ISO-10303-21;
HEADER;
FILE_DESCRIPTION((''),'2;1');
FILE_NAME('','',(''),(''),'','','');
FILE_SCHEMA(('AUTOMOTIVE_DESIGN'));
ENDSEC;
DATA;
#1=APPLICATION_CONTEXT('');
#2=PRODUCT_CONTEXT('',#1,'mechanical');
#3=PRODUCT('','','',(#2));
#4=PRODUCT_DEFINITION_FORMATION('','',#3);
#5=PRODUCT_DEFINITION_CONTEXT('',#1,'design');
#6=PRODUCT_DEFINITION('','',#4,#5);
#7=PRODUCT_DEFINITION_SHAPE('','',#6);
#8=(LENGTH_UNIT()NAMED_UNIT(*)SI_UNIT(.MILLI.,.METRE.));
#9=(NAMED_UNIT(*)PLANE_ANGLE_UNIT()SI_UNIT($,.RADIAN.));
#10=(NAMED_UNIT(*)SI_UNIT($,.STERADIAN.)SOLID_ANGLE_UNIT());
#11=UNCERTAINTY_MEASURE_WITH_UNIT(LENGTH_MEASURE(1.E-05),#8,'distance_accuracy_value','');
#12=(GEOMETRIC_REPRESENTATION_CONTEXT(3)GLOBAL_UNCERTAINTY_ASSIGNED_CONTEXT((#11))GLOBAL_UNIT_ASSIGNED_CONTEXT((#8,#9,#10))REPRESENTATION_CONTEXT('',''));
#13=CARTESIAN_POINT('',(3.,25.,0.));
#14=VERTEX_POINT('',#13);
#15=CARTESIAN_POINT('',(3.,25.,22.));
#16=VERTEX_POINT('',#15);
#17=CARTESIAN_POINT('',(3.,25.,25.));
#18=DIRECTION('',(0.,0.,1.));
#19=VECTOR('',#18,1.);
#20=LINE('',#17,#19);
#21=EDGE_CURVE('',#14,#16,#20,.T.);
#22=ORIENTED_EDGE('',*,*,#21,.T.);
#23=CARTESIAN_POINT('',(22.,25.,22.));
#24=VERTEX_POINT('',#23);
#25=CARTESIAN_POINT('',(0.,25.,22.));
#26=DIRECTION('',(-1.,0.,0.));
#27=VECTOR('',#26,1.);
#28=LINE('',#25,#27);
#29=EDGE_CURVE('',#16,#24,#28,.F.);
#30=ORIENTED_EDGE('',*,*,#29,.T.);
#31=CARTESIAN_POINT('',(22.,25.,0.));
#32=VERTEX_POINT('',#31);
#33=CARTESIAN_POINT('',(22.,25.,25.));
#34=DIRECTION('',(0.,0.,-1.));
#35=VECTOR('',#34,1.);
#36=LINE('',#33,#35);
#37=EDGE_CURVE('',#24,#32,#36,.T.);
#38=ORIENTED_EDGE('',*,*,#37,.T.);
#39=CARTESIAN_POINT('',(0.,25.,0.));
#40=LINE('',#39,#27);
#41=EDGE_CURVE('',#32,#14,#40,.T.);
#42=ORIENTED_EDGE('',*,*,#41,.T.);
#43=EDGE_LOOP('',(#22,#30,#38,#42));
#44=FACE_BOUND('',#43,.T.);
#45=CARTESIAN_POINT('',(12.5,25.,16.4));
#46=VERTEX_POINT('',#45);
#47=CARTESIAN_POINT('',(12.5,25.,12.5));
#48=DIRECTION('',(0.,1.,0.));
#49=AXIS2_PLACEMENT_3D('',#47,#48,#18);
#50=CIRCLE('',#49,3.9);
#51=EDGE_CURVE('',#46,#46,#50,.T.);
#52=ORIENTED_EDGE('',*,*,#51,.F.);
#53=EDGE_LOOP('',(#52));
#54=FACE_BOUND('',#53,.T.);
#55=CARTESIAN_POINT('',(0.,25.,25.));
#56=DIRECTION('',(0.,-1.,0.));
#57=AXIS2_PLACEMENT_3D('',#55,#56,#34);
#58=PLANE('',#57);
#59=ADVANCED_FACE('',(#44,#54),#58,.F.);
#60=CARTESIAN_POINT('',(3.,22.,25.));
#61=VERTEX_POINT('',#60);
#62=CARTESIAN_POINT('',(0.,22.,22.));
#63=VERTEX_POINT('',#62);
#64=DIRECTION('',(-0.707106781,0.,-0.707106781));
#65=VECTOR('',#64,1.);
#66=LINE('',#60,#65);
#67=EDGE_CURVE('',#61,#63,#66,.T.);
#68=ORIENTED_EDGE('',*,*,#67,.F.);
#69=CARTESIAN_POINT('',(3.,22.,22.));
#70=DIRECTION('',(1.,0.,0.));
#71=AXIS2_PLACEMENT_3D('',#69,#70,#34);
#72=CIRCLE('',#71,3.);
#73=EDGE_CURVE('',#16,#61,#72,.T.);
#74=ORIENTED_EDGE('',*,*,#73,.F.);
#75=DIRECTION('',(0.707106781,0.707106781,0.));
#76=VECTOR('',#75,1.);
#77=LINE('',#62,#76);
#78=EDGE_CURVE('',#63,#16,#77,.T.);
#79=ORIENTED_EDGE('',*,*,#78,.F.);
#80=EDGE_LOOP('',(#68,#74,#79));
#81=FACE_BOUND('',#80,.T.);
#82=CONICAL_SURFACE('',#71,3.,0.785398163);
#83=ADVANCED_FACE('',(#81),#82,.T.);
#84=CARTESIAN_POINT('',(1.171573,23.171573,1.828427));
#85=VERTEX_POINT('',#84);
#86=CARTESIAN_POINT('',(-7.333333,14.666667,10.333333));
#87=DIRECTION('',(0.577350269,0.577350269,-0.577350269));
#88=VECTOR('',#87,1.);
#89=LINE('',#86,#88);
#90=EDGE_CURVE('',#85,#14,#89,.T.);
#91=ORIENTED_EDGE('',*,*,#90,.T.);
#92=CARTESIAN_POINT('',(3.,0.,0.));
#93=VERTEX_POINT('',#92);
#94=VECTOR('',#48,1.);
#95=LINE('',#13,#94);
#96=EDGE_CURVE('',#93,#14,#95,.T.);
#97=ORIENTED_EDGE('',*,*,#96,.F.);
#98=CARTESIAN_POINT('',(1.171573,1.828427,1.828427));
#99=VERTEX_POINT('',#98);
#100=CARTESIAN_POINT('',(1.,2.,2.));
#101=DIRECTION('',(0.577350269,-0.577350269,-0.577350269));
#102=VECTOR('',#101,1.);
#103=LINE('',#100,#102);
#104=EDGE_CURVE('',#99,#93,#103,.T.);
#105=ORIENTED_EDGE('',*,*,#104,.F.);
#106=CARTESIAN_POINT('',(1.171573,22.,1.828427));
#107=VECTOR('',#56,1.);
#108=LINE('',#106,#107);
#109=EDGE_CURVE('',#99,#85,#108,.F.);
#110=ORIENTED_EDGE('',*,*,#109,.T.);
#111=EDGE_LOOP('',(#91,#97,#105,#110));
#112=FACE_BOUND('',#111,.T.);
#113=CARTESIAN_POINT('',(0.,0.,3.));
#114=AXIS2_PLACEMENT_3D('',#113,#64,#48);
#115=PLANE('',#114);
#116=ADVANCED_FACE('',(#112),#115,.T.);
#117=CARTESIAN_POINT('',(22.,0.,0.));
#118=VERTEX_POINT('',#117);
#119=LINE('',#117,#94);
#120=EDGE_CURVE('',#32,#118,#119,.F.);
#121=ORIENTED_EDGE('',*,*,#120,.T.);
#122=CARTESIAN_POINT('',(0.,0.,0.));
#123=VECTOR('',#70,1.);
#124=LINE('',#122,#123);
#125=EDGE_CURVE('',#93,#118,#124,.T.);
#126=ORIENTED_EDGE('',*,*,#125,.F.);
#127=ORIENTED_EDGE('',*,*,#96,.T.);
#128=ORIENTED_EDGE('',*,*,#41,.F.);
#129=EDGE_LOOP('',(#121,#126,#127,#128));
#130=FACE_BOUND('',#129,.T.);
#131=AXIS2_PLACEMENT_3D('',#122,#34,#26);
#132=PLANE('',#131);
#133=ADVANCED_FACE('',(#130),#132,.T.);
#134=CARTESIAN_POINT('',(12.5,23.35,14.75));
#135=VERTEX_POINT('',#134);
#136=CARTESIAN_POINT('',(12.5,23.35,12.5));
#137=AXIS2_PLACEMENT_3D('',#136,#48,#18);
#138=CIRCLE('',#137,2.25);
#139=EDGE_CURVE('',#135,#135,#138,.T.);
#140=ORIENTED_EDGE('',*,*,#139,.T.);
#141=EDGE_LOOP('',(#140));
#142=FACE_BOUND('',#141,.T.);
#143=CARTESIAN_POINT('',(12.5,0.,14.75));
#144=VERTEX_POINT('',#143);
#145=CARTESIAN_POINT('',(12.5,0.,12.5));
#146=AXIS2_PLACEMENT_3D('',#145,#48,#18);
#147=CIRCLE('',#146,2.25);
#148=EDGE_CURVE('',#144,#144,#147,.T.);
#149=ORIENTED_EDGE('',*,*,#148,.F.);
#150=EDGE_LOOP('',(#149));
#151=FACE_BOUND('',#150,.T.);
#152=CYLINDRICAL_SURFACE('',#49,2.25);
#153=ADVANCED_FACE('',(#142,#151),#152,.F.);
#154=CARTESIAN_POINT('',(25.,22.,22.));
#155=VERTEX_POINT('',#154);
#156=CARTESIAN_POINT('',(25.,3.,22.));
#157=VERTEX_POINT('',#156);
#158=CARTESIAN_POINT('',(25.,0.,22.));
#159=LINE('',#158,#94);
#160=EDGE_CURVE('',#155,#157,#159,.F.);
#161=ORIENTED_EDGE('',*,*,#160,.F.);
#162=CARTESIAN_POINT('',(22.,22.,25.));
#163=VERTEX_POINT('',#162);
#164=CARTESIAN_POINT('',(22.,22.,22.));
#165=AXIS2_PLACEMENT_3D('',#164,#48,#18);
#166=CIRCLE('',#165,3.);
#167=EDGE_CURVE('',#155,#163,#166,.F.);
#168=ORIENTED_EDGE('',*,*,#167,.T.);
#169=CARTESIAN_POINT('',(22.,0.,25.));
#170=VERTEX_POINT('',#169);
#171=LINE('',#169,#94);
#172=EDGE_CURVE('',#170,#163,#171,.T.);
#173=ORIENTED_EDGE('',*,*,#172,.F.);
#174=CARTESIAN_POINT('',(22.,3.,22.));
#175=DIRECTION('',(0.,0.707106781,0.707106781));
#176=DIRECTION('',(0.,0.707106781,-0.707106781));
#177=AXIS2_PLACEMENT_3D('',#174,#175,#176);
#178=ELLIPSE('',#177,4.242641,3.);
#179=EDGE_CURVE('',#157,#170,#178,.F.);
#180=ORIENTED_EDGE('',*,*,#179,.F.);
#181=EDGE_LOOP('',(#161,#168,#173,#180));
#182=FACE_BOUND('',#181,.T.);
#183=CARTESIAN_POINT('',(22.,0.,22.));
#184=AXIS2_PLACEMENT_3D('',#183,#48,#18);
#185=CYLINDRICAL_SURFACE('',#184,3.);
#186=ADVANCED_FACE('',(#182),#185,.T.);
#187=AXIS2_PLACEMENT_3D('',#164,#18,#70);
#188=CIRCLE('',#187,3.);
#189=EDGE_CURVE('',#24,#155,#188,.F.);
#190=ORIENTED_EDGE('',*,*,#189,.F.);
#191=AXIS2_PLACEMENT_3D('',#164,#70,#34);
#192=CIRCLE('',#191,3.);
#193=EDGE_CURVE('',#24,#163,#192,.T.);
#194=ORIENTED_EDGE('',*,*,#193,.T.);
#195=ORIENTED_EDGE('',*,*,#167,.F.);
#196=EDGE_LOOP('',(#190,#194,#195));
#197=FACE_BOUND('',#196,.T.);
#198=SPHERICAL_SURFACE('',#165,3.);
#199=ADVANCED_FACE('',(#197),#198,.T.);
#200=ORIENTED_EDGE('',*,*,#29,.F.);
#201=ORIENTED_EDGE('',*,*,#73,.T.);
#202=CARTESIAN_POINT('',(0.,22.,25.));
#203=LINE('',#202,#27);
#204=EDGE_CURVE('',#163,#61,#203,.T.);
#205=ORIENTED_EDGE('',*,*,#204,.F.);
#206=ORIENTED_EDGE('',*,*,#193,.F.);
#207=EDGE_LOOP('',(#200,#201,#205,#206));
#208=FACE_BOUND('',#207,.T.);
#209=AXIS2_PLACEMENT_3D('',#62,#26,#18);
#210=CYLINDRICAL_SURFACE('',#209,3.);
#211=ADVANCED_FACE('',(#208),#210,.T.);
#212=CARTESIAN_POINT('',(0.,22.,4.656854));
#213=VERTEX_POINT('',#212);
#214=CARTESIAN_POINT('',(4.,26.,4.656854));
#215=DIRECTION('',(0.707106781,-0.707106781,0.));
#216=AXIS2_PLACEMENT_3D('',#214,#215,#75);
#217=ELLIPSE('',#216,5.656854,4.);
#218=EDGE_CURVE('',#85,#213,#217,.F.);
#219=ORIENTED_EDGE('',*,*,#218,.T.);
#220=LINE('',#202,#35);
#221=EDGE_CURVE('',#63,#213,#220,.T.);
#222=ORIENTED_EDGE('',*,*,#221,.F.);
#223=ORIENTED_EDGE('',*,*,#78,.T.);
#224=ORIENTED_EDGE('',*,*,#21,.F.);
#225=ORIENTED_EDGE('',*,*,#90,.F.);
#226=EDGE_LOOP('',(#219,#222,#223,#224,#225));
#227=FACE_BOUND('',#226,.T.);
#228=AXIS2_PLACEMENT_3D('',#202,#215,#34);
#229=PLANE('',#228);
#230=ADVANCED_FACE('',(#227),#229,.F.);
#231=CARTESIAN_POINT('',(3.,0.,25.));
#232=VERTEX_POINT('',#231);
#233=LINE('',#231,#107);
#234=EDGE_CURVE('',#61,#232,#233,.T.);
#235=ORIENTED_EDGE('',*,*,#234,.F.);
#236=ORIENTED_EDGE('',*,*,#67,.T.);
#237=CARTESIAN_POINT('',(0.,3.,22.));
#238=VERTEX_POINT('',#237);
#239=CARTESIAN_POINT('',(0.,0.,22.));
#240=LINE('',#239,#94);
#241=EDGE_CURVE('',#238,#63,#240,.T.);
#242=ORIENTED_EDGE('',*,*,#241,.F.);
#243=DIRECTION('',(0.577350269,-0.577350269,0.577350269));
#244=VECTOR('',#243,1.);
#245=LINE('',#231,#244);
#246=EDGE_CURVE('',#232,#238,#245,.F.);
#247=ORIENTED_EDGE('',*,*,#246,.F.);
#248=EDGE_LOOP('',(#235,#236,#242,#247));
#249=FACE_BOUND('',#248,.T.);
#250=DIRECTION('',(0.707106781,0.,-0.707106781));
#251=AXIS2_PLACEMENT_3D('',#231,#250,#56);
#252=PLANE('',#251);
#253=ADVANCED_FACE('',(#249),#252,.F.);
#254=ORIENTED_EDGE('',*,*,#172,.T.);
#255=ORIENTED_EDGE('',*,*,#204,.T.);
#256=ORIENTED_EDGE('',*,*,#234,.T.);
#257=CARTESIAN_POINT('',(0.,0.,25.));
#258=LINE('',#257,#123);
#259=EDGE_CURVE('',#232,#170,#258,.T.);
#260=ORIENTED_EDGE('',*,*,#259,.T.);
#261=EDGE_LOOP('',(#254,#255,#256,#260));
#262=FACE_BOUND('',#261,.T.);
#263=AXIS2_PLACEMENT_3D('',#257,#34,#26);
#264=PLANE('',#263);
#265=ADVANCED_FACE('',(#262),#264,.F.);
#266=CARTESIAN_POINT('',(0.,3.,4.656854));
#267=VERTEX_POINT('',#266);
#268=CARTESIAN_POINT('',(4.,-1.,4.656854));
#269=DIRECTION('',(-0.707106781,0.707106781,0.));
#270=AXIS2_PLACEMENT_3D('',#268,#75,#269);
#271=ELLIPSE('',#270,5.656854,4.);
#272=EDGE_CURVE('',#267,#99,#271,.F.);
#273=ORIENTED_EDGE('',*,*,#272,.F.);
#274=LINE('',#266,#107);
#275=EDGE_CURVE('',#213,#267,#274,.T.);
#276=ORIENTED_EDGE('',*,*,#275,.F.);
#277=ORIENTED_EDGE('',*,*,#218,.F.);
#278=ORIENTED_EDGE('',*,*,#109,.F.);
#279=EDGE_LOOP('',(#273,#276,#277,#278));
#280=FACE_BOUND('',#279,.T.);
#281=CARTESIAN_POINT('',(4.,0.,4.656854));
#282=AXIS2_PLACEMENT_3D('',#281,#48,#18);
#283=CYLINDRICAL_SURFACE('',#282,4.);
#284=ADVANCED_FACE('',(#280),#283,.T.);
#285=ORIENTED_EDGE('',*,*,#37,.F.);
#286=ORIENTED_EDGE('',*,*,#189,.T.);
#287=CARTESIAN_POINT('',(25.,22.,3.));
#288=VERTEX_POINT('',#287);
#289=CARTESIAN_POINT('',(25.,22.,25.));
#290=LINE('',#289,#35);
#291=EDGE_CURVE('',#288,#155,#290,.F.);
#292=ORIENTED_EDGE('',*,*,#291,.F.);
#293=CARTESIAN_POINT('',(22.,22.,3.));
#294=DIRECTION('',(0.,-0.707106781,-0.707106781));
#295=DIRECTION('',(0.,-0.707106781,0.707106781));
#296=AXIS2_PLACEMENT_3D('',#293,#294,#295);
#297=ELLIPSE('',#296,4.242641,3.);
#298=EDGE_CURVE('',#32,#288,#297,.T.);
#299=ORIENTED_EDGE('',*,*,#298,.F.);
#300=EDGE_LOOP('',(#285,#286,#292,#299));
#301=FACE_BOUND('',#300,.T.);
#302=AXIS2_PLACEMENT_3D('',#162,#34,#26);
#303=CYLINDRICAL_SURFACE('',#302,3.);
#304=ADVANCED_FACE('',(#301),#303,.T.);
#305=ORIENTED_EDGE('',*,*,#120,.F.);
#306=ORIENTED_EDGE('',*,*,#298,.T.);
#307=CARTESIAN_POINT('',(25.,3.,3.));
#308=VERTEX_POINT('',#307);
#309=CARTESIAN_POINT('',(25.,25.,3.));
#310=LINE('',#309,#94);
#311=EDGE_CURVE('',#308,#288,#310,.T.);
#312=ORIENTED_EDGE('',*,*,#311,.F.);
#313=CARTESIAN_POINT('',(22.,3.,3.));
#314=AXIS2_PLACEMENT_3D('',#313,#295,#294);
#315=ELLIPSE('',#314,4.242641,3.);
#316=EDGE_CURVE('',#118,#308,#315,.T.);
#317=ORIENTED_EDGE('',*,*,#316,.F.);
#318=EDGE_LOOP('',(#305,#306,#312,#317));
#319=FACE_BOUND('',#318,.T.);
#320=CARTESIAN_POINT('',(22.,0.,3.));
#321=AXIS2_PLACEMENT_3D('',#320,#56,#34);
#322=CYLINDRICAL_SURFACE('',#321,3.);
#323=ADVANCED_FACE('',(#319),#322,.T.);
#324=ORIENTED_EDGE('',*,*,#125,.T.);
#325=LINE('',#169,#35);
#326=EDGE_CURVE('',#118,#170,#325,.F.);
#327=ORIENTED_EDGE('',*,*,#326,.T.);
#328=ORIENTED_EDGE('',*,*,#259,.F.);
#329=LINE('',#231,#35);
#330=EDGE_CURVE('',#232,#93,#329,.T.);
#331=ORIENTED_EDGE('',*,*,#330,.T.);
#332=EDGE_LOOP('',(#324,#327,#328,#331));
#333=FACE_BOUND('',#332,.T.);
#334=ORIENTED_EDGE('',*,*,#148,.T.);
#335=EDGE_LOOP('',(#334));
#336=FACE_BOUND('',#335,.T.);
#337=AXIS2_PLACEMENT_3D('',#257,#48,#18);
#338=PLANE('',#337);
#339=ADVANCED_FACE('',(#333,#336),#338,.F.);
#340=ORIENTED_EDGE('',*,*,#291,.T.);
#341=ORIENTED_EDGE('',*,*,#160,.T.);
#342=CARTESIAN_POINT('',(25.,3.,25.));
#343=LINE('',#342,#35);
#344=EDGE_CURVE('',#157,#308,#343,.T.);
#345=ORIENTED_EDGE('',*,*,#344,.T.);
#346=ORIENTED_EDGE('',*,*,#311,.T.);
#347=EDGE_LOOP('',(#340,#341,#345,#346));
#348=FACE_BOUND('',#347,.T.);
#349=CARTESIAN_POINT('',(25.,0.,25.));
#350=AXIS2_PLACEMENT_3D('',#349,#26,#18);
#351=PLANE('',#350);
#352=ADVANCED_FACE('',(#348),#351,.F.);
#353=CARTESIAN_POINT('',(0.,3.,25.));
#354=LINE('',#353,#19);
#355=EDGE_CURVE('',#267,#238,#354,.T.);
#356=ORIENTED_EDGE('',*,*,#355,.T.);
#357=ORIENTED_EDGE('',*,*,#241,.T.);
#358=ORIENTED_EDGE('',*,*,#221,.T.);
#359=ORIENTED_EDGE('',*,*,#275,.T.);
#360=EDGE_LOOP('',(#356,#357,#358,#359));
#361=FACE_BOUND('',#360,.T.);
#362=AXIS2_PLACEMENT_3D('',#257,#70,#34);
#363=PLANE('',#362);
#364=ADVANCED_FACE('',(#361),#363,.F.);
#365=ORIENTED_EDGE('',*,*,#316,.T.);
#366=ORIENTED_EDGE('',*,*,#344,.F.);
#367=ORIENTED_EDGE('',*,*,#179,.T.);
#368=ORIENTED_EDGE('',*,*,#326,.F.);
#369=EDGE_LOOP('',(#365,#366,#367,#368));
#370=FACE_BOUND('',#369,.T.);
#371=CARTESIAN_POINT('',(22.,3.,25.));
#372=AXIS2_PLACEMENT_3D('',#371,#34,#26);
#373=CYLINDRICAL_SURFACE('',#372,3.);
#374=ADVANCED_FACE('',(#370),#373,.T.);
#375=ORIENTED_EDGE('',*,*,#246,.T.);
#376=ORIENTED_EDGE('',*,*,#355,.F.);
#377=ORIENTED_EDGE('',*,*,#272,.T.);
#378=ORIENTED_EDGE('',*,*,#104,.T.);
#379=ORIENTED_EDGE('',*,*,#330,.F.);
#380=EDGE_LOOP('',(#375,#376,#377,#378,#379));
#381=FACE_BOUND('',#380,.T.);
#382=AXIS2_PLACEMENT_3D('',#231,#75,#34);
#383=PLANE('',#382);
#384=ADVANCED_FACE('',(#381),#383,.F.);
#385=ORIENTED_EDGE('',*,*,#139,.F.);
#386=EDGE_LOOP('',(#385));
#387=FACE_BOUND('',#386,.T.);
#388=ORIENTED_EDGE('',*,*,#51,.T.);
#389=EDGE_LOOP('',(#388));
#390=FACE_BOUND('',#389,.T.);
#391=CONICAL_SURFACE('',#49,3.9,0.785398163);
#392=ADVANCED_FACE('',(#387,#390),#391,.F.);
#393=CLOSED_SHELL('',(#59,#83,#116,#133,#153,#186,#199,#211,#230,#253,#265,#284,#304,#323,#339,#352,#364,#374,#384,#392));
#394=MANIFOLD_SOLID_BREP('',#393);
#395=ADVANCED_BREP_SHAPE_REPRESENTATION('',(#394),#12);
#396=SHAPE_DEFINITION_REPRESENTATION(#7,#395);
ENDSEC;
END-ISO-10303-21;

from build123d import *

# Parameters (mm, degrees)
SKETCH_1_W       = 25
SKETCH_1_H       = 25
EXTRUDE_1_DEPTH  = 25
FILLET_1_R       = 3
CHAMFER_1_SIZE   = 3
FILLET_1_2_DEPTH = 25


with BuildPart() as part:
    # 草图1 → 凸台-拉伸1 (new body)
    with BuildSketch(Plane.XY):
        with Locations((12.5, 12.5)):
            Rectangle(SKETCH_1_W, SKETCH_1_H)
    extrude(amount=EXTRUDE_1_DEPTH)

    # 草图2 → 切除-旋转1 (revolve, cut)
    with BuildSketch(Plane.XY.offset(12.5), mode=Mode.PRIVATE) as cut_revolve_1_sk:
        Polygon((10.25, 0), (10.25, 23.35), (8.6, 25), (12.5, 25), (12.5, 0), align=None)
    revolve(cut_revolve_1_sk.sketch.rotate(Axis((12.5, 25, 12.5), (0, -1, 0)), 270), axis=Axis((12.5, 25, 12.5), (0, -1, 0)), mode=Mode.SUBTRACT)

    # Fillet 1
    fillet_1_edges = [part.edges().sort_by_distance(p)[0] for p in [
        (25, 12.5, 25),
        (12.5, 25, 25),
        (25, 12.5, 0),
        (25, 25, 12.5),
        (25, 0, 12.5),
    ]]
    fillet(fillet_1_edges, radius=FILLET_1_R)

    # 倒角1
    chamfer_1_edges = [part.edges().sort_by_distance(p)[0] for p in [
        (0, 11, 25),
        (0, 25, 11),
        (0, 24.121320344, 24.121320344),
        (0, 12.5, 0),
        (0, 0, 12.5),
    ]]
    chamfer(chamfer_1_edges, length=CHAMFER_1_SIZE)

    # Fillet 1 2: read off the stored shape, not the designer's step
    # Fillet 1 2 outline → Fillet 1 2 (cut)
    with BuildSketch(Plane(origin=(0, 0, 0), x_dir=(1, 0, 0), z_dir=(0, 1, 0))):
        with BuildLine():
            ThreePointArc((0, -4.656854249), (0.30448187, -3.12612052), (1.171572875, -1.828427125))
            Line((1.171572875, -1.828427125), (0, -3))
            Line((0, -3), (0, -4.656854249))
        make_face()
    extrude(amount=FILLET_1_2_DEPTH, mode=Mode.SUBTRACT)


solid = part.part
